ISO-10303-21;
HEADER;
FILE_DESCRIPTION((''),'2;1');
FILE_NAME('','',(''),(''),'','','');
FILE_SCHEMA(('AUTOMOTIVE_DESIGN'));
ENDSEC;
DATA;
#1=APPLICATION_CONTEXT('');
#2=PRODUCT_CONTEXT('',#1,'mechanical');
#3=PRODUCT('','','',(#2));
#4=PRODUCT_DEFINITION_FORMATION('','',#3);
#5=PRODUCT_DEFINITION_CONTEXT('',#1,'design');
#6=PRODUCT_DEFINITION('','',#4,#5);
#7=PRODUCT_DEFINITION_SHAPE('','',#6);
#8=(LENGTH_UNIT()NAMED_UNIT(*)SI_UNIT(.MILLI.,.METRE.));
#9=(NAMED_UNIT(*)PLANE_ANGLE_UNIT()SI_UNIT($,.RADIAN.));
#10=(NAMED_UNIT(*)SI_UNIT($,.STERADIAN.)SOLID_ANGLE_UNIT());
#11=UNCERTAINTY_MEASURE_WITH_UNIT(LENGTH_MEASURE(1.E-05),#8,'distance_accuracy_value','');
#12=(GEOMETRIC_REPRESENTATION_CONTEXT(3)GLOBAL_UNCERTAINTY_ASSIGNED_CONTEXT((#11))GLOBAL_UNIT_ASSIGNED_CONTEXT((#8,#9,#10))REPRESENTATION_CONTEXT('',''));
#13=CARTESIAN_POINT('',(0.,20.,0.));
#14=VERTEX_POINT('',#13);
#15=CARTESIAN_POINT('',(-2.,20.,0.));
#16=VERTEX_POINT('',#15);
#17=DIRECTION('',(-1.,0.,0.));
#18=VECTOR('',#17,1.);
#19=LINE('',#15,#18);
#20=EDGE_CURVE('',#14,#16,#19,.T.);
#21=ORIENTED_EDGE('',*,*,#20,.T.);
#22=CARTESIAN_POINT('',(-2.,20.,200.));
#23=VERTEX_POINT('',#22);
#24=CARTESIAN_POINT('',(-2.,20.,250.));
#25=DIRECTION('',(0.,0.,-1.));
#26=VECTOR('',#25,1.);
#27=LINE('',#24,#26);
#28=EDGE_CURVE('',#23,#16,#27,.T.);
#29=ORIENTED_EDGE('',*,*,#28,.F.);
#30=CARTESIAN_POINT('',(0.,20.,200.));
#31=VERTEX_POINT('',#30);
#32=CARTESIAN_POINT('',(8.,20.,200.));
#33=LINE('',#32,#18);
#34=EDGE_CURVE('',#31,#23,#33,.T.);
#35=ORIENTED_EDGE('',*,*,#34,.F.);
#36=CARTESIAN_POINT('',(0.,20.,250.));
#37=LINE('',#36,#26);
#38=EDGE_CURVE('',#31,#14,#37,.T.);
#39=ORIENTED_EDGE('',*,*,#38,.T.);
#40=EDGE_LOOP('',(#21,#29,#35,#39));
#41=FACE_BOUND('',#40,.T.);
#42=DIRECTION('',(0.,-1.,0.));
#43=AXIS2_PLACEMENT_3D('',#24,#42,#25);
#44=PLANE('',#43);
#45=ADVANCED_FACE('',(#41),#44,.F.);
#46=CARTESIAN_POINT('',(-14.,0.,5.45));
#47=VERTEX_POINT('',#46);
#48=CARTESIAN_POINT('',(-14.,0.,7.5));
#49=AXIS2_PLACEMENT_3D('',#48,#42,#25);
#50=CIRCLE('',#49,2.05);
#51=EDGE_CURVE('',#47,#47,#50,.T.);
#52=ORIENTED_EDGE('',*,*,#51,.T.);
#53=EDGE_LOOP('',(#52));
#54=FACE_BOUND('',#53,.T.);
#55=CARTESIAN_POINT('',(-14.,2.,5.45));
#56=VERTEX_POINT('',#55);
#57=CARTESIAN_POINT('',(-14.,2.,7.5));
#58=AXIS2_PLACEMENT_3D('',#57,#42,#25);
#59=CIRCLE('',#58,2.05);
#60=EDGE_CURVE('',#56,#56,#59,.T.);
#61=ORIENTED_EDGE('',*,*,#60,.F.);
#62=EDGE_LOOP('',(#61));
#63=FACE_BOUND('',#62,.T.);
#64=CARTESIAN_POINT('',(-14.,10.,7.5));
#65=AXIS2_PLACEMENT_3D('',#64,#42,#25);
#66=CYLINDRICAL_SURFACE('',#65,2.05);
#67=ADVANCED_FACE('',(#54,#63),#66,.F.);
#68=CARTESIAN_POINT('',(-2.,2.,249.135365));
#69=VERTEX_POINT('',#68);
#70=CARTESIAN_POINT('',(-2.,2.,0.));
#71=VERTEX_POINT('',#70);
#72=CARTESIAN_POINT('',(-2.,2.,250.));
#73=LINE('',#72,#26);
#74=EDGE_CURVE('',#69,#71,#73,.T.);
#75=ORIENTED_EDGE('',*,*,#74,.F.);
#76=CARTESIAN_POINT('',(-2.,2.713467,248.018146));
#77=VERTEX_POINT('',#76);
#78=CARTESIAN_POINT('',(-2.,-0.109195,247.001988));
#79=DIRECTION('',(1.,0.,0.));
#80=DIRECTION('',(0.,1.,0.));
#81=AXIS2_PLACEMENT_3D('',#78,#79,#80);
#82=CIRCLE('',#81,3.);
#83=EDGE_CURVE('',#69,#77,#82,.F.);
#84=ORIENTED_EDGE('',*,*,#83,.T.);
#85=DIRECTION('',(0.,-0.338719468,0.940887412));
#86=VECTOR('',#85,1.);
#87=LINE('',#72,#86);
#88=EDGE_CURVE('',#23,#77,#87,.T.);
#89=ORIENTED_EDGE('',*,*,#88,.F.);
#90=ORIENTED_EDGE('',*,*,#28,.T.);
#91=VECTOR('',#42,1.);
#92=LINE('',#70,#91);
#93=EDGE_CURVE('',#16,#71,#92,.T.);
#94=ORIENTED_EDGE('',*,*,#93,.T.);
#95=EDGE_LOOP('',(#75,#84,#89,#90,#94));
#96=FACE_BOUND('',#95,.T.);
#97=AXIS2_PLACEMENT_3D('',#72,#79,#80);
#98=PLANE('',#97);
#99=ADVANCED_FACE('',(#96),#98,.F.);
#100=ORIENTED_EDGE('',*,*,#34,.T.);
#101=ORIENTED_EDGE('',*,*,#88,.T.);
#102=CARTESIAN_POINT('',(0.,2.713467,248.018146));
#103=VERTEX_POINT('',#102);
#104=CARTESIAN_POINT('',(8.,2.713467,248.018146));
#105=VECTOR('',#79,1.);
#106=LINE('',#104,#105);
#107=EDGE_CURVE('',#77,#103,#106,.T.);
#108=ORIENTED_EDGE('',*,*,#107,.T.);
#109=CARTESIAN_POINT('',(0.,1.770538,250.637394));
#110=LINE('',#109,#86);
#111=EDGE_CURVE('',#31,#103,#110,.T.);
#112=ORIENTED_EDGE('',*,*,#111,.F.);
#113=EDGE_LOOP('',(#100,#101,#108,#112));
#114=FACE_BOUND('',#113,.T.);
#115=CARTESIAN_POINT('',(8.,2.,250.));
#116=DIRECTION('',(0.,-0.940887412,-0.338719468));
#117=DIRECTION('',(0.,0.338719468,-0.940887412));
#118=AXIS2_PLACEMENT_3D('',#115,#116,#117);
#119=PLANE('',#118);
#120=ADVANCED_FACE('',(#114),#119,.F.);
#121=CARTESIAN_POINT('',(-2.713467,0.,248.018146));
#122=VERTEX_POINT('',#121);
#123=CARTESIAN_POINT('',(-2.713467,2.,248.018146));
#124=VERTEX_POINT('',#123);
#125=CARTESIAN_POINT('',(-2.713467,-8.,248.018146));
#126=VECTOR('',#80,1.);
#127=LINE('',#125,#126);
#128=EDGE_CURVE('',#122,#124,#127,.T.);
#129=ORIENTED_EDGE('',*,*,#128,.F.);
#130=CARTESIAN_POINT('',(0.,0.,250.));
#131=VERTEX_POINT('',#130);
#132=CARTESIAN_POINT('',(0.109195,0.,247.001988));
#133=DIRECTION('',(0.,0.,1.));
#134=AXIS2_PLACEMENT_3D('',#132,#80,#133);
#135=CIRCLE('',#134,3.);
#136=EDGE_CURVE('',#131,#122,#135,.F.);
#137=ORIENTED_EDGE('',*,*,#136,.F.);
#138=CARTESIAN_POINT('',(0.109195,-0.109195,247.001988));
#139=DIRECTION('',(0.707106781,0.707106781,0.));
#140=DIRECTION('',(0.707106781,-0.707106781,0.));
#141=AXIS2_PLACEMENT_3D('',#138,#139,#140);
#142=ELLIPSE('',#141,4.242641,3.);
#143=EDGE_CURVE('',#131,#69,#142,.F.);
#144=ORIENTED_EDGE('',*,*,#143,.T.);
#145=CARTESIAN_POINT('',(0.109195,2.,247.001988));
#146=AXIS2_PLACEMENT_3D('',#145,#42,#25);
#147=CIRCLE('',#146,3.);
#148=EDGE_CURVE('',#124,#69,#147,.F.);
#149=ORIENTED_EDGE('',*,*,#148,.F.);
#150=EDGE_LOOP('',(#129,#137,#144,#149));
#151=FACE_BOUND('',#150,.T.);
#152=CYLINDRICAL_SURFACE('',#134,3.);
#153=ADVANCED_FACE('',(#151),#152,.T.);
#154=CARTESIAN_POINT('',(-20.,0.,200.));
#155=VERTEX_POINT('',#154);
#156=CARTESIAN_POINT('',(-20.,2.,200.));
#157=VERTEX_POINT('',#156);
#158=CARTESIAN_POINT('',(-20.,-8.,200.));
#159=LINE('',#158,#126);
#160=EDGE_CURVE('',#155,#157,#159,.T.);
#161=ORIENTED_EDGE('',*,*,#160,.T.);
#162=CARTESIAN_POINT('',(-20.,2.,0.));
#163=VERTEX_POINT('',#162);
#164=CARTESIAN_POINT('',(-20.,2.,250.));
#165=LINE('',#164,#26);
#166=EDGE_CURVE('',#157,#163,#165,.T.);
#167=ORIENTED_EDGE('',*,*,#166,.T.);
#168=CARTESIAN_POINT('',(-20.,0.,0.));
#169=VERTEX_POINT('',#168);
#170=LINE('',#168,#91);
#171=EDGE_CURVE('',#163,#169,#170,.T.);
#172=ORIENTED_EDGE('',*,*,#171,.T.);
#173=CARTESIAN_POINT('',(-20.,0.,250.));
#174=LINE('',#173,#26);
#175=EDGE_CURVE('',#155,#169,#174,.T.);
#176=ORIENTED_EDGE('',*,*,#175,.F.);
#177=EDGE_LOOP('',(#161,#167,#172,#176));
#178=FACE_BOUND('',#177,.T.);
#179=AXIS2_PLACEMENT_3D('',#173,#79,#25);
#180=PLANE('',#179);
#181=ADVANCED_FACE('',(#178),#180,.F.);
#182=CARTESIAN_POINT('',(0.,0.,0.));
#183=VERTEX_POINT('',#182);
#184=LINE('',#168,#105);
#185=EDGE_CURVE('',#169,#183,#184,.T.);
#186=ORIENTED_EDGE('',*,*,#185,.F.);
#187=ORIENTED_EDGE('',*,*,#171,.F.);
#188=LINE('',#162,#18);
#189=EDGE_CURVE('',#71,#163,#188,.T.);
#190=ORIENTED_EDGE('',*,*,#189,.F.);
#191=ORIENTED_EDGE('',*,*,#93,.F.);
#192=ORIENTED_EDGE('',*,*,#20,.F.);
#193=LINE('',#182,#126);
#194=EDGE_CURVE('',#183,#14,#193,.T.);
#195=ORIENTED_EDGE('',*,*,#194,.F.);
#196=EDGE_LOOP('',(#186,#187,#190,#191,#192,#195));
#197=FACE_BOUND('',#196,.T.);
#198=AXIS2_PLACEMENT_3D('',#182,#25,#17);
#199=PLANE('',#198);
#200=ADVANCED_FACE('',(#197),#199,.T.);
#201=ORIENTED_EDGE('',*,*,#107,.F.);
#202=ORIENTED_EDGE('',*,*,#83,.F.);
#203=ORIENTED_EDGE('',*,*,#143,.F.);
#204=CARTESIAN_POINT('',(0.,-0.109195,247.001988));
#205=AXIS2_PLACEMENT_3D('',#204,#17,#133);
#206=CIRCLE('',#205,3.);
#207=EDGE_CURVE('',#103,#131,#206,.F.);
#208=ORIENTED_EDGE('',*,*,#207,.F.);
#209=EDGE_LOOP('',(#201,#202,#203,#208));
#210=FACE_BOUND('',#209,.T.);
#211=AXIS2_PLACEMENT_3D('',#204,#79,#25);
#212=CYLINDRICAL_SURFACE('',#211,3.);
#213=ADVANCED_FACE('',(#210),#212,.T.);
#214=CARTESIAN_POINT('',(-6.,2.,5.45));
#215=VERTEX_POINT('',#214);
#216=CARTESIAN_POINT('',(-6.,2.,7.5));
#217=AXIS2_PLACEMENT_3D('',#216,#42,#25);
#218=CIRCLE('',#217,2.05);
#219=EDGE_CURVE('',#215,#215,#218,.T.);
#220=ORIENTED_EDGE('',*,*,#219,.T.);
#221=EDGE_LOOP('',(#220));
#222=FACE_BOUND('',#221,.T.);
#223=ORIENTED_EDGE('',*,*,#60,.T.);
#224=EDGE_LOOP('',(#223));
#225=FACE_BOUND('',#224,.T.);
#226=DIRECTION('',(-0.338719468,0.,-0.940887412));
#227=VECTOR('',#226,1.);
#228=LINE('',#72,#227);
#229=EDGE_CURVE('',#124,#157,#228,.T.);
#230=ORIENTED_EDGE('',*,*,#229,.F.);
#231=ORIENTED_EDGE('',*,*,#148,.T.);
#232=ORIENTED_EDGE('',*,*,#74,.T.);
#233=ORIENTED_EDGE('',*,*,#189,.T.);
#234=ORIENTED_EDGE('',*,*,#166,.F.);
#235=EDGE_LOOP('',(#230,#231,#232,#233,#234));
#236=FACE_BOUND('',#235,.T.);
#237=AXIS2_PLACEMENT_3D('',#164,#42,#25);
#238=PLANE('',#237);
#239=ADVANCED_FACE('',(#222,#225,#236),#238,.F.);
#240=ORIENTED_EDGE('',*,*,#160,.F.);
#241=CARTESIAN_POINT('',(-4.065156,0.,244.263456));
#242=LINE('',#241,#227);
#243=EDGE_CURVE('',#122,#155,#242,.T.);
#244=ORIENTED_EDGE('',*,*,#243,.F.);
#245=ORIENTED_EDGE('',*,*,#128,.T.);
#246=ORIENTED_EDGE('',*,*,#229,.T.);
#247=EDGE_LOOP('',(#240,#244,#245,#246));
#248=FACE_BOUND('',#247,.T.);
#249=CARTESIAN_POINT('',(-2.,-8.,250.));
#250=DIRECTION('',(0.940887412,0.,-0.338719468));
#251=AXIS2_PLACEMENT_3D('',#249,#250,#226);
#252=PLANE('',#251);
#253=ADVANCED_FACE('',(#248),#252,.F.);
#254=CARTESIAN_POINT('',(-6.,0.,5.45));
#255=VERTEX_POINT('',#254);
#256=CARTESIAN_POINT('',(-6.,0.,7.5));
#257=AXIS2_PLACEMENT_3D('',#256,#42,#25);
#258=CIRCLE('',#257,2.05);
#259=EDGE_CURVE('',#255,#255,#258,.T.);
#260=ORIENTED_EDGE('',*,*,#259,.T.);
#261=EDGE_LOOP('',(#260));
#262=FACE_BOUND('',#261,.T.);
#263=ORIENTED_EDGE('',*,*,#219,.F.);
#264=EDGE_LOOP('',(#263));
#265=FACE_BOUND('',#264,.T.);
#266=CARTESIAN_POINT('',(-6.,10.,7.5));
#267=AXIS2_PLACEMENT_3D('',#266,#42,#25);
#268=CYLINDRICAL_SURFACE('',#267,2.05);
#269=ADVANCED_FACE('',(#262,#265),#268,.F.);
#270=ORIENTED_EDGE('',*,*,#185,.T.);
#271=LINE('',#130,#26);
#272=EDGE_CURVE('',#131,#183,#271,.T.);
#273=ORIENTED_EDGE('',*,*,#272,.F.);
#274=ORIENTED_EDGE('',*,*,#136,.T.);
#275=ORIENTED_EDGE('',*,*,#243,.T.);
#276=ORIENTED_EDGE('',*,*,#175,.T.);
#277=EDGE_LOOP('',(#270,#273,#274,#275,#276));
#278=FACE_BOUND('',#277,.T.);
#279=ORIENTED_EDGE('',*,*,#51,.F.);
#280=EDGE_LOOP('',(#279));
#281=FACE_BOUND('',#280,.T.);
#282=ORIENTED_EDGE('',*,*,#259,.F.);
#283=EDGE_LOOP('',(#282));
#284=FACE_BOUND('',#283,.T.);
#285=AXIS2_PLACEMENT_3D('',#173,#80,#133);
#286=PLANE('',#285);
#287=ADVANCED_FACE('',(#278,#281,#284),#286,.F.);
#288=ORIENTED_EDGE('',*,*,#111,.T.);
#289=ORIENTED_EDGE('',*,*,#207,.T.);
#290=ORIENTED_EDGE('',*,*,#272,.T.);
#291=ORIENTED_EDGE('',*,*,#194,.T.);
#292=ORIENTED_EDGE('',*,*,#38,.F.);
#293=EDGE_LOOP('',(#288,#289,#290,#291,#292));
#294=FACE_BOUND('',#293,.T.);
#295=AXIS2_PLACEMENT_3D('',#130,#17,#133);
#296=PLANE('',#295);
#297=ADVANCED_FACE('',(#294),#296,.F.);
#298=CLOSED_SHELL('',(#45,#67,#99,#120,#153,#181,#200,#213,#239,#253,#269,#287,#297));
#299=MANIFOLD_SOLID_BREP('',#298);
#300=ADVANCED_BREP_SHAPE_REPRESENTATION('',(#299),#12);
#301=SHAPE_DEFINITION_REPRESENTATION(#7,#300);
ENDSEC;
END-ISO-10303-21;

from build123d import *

# Parameters (mm, degrees)
EXTRUDE_1_DEPTH     = 250
CUT_EXTRUDE_1_DEPTH = 10
CUT_EXTRUDE_2_DEPTH = 10
FILLET_1_R          = 3
SKETCH_5_R          = 2.05
CUT_EXTRUDE_4_DEPTH = 10


with BuildPart() as part:
    # 草图1 → 凸台-拉伸1 (new body)
    with BuildSketch(Plane.XY):
        Polygon((-20, 0), (0, 0), (0, 20), (-2, 20), (-2, 2), (-20, 2), align=None)
    extrude(amount=EXTRUDE_1_DEPTH)

    # 草图2 → 切除-拉伸1 (cut)
    with BuildSketch(Plane.ZY.offset(2)):
        Polygon((250, 2), (200, 20), (250, 20), align=None)
    extrude(amount=-CUT_EXTRUDE_1_DEPTH, mode=Mode.SUBTRACT)

    # 草图3 → 切除-拉伸2 (cut)
    with BuildSketch(Plane(origin=(0, 2, 0), x_dir=(1, 0, 0), z_dir=(0, 1, 0))):
        Polygon((-2, -250), (-20, -200), (-20, -250), align=None)
    extrude(amount=-CUT_EXTRUDE_2_DEPTH, mode=Mode.SUBTRACT)

    # 圆角1
    # the kernel refuses this fillet: 3 mm, written as the material it takes off along each edge
    with BuildSketch(Plane(origin=(-7.265916136, 2, 250), x_dir=(0, -1, 0), z_dir=(1, 0, 0))) as fillet_1_piece_1:
        with BuildLine():
            CenterArc((2.10919491, 2.998012087), FILLET_1_R, 199.798876355, 68.115193721)
            Line((-0.713467325, 1.981853682), (-0.76992057, 1.961530514))
            Line((-0.76992057, 1.961530514), (-0.056453245, -0.020323168))
            Line((-0.056453245, -0.020323168), (0, -0.06))
            ThreePointArc((0, -0.06), (1, -0.06), (1.997816102, -0.059960242))
            Line((1.997816102, -0.059960242), (2, 0))
        make_face()
    extrude(amount=12.531832272, mode=Mode.SUBTRACT)
    with BuildSketch(Plane(origin=(-2, 7.265916136, 250), x_dir=(1, 0, 0), z_dir=(0, -1, 0))) as fillet_1_piece_2:
        with BuildLine():
            CenterArc((2.10919491, -2.998012087), FILLET_1_R, 92.085929924, 68.115193721)
            Line((-0.713467325, -1.981853682), (-0.76992057, -1.961530514))
            Line((-0.76992057, -1.961530514), (-0.056453245, 0.020323168))
            Line((-0.056453245, 0.020323168), (0, 0.06))
            ThreePointArc((0, 0.06), (1, 0.06), (1.997816102, 0.059960242))
            Line((1.997816102, 0.059960242), (2, 0))
        make_face()
    extrude(amount=12.531832272, mode=Mode.SUBTRACT)

    # 草图5 → 切除-拉伸4 (cut)
    with BuildSketch(Plane.XZ):
        with Locations(Location((-14, 7.5, 0), (0, 0, 270))):
            Circle(SKETCH_5_R)
        with Locations(Location((-6, 7.5, 0), (0, 0, 270))):
            Circle(SKETCH_5_R)
    extrude(amount=-CUT_EXTRUDE_4_DEPTH, mode=Mode.SUBTRACT)


solid = part.part
